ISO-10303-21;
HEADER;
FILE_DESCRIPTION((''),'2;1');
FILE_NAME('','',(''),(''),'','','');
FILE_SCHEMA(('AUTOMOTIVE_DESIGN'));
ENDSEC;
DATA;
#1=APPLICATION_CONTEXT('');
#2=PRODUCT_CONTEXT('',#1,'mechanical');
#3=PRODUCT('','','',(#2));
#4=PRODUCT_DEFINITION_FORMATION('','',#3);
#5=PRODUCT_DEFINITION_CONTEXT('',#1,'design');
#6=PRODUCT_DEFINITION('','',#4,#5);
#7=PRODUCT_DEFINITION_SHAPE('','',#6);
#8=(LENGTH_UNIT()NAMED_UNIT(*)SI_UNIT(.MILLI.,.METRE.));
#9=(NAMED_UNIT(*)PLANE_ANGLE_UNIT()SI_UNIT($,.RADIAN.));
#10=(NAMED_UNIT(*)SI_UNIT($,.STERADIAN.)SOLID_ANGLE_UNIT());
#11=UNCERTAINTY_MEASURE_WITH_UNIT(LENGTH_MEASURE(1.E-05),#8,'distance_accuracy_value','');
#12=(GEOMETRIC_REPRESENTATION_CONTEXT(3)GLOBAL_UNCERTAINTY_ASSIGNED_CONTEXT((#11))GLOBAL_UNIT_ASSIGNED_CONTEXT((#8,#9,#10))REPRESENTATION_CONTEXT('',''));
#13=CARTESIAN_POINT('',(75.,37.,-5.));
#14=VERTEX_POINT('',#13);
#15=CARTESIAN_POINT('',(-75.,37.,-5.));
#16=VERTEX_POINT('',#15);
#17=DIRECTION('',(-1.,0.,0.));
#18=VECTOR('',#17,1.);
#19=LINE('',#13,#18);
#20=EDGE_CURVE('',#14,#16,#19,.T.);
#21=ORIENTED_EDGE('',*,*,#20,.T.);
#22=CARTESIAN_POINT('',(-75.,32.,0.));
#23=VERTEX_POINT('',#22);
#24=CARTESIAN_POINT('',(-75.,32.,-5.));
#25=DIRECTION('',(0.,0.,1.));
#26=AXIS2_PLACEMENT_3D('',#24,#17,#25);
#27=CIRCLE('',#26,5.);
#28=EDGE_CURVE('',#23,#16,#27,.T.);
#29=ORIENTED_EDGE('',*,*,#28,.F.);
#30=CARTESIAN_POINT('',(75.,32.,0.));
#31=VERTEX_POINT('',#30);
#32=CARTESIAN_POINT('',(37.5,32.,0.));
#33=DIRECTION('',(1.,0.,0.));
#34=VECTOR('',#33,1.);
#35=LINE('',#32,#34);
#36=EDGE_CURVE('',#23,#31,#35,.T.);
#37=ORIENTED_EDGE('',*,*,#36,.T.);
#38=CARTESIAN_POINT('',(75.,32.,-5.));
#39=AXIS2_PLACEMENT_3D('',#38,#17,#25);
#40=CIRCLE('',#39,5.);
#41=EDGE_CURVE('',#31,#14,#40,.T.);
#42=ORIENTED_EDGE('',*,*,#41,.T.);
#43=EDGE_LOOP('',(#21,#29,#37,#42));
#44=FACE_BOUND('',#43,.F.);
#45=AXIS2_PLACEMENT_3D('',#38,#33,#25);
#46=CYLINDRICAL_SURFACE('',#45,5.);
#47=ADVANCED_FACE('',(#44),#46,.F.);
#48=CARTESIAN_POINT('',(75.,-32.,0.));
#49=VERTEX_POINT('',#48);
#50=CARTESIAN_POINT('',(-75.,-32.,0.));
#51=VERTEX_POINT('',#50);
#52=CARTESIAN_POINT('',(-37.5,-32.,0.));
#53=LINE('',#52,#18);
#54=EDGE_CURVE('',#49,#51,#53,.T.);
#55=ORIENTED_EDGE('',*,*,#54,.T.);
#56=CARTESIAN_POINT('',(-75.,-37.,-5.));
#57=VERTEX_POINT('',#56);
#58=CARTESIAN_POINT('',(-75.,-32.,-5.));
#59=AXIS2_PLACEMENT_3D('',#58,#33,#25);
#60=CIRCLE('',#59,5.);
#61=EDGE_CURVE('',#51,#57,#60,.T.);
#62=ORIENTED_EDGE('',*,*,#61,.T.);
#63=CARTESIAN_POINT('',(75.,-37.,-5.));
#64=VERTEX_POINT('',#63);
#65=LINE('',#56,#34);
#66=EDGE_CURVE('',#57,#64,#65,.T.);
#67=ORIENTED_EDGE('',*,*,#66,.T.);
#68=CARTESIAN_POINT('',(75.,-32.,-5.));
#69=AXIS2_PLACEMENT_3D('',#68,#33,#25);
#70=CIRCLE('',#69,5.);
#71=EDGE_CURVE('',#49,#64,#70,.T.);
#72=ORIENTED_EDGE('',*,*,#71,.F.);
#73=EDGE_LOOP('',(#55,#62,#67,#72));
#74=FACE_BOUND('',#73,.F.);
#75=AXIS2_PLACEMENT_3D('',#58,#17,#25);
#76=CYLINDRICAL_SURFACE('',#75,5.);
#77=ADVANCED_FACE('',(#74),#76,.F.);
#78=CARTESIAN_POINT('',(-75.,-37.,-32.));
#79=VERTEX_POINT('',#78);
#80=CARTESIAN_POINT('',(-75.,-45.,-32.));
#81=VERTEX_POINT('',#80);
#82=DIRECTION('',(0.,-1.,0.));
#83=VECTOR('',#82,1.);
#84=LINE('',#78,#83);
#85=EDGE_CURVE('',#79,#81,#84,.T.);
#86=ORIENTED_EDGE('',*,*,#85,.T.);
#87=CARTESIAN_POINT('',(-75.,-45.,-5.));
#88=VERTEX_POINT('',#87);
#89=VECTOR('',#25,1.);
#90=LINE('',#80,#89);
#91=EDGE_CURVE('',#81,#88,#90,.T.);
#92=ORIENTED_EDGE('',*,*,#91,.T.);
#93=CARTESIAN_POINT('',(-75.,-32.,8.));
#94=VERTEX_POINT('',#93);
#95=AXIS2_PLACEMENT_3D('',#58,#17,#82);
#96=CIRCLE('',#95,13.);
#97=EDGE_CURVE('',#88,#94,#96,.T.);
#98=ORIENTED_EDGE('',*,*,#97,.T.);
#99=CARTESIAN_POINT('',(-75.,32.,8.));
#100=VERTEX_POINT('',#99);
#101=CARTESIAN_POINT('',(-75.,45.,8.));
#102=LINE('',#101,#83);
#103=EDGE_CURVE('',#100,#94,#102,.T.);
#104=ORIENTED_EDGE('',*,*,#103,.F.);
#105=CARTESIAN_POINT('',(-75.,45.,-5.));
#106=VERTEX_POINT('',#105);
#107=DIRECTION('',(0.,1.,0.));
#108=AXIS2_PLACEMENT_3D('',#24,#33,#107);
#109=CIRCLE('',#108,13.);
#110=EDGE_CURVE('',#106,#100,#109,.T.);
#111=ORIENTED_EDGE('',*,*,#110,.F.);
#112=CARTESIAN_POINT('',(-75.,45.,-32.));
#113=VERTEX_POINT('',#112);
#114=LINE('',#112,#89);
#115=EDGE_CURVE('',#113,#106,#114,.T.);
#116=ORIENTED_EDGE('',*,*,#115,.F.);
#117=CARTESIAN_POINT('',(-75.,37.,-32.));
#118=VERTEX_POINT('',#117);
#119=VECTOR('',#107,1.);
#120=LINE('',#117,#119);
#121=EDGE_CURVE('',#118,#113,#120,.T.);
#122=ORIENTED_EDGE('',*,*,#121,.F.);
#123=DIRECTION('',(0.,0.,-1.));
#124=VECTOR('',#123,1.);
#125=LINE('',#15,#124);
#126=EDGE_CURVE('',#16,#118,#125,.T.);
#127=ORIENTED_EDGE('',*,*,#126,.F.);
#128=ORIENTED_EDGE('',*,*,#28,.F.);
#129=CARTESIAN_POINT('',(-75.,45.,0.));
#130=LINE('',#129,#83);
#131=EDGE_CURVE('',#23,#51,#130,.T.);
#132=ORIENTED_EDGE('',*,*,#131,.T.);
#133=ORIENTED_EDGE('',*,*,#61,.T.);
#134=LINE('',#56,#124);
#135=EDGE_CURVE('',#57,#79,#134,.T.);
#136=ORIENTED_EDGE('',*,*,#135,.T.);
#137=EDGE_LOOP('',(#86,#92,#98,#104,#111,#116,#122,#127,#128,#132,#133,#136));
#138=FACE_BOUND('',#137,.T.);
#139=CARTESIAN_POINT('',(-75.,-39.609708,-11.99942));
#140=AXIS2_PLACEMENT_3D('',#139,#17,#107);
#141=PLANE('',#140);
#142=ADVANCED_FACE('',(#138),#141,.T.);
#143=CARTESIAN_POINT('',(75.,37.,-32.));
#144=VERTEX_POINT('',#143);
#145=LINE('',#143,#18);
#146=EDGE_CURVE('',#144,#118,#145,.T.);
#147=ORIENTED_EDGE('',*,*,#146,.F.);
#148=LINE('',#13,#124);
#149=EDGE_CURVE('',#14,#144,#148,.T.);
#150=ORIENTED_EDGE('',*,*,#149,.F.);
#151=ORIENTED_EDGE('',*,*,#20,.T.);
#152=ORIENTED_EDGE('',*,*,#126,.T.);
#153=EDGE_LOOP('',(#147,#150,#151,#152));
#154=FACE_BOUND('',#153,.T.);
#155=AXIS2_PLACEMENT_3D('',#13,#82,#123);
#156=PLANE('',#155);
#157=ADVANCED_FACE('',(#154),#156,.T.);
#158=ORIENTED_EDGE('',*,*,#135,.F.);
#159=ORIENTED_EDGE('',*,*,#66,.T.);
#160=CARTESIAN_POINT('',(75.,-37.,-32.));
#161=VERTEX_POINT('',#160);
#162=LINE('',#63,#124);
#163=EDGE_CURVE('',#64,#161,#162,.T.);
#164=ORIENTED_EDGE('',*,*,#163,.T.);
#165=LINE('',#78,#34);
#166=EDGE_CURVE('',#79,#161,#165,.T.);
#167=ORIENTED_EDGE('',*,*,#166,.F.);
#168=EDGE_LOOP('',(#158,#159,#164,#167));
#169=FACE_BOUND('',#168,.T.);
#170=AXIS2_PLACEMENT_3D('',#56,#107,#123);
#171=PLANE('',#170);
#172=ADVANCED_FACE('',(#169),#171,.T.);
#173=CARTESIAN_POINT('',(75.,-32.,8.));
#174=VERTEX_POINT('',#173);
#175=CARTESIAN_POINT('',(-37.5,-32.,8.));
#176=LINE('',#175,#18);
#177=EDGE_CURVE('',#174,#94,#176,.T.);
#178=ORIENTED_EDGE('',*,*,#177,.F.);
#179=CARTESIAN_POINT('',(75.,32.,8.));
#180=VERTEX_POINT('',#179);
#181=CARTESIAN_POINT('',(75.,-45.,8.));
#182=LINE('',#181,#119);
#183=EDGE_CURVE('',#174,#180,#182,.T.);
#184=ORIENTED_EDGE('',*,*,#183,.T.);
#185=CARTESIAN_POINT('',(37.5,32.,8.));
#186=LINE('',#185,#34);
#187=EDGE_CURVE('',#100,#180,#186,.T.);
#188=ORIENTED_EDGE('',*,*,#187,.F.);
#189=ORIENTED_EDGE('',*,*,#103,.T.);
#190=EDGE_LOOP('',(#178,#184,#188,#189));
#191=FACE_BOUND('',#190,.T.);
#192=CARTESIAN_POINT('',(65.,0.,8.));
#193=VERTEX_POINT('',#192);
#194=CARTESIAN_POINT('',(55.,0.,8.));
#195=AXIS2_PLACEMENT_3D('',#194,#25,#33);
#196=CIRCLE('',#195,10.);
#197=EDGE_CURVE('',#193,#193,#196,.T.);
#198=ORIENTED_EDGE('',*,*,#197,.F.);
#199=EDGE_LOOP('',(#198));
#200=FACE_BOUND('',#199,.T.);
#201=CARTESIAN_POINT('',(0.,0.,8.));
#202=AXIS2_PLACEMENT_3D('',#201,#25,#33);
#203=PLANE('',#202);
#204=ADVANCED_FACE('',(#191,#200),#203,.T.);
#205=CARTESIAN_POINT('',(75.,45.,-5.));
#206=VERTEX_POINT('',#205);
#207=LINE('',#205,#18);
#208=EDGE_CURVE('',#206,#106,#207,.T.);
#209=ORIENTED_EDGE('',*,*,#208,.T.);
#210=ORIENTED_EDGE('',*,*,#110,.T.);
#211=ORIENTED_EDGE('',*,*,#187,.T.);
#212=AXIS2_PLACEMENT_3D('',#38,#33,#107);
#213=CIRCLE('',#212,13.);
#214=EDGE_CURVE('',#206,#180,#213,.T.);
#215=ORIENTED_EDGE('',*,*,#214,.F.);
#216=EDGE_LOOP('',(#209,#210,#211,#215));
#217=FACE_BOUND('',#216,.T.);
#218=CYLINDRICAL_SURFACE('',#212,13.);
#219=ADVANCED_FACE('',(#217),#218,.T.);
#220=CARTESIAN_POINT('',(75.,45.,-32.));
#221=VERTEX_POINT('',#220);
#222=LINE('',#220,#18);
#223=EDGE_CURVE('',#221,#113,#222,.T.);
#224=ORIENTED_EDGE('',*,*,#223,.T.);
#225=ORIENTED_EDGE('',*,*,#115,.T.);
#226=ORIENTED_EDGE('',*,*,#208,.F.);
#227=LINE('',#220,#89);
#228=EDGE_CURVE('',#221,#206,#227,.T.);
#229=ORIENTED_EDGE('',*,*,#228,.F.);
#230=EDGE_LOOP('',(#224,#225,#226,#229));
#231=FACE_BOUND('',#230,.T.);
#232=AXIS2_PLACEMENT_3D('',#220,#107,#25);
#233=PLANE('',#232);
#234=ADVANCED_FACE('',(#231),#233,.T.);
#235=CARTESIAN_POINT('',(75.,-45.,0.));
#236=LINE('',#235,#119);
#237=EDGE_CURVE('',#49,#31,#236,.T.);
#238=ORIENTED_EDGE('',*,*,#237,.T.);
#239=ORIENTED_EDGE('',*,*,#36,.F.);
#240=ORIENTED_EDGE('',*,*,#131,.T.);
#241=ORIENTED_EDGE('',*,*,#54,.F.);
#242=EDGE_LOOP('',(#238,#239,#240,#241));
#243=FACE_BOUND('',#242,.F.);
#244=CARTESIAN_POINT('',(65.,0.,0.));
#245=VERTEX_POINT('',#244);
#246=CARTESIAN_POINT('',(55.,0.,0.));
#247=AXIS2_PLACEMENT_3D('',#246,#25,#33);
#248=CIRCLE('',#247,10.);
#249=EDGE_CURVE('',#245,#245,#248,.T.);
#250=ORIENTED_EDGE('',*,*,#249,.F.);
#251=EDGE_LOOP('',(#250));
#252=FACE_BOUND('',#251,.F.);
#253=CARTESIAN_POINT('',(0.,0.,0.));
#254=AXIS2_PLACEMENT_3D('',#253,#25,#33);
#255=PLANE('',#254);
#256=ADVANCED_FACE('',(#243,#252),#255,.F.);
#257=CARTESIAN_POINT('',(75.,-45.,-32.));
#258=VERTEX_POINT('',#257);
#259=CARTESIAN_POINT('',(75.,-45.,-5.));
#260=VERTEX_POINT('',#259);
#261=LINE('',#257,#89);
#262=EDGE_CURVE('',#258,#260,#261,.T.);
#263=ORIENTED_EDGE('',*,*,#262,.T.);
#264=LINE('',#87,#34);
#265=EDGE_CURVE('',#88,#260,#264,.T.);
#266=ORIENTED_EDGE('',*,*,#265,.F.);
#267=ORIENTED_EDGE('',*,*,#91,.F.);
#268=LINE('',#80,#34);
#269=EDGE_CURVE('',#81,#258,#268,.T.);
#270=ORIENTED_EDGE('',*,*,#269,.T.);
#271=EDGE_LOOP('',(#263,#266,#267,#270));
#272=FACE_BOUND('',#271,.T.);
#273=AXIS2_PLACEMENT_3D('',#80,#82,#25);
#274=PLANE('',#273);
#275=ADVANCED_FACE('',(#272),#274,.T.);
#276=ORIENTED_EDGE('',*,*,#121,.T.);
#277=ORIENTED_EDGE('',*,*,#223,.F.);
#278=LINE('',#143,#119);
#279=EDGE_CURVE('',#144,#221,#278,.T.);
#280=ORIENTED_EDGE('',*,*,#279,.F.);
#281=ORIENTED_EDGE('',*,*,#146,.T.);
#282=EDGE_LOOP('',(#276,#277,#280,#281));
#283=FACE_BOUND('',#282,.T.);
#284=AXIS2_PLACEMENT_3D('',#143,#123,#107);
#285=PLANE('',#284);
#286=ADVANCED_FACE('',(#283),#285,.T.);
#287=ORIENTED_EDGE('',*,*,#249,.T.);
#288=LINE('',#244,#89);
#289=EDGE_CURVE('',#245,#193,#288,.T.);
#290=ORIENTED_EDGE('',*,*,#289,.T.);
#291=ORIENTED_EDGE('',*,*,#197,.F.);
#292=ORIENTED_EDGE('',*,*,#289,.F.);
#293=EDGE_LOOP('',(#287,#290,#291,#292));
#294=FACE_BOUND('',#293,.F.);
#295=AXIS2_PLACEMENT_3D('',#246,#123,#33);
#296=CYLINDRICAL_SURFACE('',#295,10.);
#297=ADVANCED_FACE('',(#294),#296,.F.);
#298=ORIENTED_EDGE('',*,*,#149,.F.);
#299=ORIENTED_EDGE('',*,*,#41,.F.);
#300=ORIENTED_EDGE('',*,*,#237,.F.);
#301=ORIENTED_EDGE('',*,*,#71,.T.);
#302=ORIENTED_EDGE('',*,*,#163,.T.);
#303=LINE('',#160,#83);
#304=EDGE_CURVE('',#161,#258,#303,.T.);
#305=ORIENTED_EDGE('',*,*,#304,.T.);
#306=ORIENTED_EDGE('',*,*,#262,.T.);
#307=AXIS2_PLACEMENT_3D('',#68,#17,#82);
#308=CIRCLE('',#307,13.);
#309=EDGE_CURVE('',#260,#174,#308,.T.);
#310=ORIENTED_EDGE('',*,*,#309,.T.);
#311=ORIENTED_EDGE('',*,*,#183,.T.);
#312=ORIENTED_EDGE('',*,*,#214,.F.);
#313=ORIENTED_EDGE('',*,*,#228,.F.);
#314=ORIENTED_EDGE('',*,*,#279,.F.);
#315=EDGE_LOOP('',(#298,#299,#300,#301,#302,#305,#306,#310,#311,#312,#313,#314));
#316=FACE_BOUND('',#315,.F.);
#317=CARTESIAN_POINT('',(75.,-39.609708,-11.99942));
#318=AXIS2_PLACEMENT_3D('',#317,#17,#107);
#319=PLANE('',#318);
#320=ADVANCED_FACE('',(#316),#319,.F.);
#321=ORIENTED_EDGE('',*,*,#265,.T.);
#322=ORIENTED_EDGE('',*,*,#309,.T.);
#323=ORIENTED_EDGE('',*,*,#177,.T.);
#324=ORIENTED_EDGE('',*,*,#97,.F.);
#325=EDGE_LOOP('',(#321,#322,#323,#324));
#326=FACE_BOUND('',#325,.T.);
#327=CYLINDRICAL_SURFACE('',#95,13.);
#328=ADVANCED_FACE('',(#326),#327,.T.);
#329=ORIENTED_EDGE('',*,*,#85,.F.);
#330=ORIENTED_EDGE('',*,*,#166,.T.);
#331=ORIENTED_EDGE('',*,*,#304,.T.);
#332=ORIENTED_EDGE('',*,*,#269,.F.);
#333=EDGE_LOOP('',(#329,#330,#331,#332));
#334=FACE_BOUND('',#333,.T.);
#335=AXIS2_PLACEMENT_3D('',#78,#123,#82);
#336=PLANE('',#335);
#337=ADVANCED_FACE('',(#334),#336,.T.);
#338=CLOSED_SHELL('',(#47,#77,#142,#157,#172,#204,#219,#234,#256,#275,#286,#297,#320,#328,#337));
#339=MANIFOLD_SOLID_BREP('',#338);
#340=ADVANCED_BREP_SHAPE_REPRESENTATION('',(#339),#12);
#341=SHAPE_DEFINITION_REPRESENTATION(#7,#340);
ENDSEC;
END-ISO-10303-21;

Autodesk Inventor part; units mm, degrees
ref_plane "YZ Plane" through (0, 0, 0) normal (1, 0, 0) x (0, 1, 0)
ref_plane "XZ Plane" through (0, 0, 0) normal (0, 1, 0) x (-1, 0, 0)
ref_plane "XY Plane" through (0, 0, 0) normal (0, 0, 1) x (1, 0, 0)
sketch "Sketch1" plane through (0, 0, 0) normal (0, 0, 1) x (1, 0, 0)
  line L0 (-75, -45) -> (75, -45)
  line L1 (75, -45) -> (75, 45)
  line L2 (75, 45) -> (-75, 45)
  line L3 (-75, 45) -> (-75, -45)
  line L4 (-75, -45) -> (75, 45) construction
  line L5 (75, -45) -> (-75, 45) construction
  circle A0 centre (55, -25) radius 10
  circle A1 centre (55, 25) radius 10
  line L6 (0, 0) -> (75, 0) construction
  circle A2 centre (55, 0) radius 10
  dimension "d0" = 150
  dimension "d1" = 90
  dimension "d23" = 20
  dimension "d25" = 20
  dimension "d26" = 20
extrude "Plate1" add sketch "Sketch1" along normal blind 8 contours L3 L2 L1 L0 | A0 | A1
sketch "Sketch6" plane through (-75, -37, 8) normal (0, -1, 0) x (1, 0, 0)
  line L0 (150, 0) -> (0, 0)
  line L1 (0, 0) -> (0, -40)
  line L2 (0, -40) -> (150, -40)
  line L3 (150, -40) -> (150, 0)
edge flange "Flange2" height 40 angle 90 thickness 8 bend radius 5 thickness toward (0, -1, 0) relief round relief width 8 relief depth 4 corner gap 5 corner form 0 edges at (0, -45, 0) (0, 45, 0) wall of the first edge with corners at (75, -37, 8) (-75, -37, 8) (-75, -37, -32) (75, -37, -32)
bend "Bend2"
corner "Corner2"
equation "\"d26\" = d25"
equation "\"d2\" = Thickness"
equation "\"d30\" = BendReliefWidth"
equation "\"d31\" = BendReliefDepth"
equation "\"d32\" = MinimumRemnant"
equation "\"d33\" = TransitionRadius"
equation "\"d36\" = BendRadius"
equation "\"d37\" = CornerReliefSize"
equation "\"d38\" = GapSize"
equation "\"d39\" = JacobiRadiusSize"
equation "\"BendReliefWidth\" = Thickness"
equation "\"BendReliefDepth\" = 0.5 * Thickness"
equation "\"CornerReliefSize\" = 4 * Thickness"
equation "\"MinimumRemnant\" = 2 * Thickness"
equation "\"TransitionRadius\" = BendRadius"
equation "\"JacobiRadiusSize\" = BendRadius"
equation "\"GapSize\" = Thickness"
equation "\"Thickness\" = 8"
equation "\"BendRadius\" = 5"
properties part number "PRS 9785 leg floor channel_D1200 940" material "Steel"
